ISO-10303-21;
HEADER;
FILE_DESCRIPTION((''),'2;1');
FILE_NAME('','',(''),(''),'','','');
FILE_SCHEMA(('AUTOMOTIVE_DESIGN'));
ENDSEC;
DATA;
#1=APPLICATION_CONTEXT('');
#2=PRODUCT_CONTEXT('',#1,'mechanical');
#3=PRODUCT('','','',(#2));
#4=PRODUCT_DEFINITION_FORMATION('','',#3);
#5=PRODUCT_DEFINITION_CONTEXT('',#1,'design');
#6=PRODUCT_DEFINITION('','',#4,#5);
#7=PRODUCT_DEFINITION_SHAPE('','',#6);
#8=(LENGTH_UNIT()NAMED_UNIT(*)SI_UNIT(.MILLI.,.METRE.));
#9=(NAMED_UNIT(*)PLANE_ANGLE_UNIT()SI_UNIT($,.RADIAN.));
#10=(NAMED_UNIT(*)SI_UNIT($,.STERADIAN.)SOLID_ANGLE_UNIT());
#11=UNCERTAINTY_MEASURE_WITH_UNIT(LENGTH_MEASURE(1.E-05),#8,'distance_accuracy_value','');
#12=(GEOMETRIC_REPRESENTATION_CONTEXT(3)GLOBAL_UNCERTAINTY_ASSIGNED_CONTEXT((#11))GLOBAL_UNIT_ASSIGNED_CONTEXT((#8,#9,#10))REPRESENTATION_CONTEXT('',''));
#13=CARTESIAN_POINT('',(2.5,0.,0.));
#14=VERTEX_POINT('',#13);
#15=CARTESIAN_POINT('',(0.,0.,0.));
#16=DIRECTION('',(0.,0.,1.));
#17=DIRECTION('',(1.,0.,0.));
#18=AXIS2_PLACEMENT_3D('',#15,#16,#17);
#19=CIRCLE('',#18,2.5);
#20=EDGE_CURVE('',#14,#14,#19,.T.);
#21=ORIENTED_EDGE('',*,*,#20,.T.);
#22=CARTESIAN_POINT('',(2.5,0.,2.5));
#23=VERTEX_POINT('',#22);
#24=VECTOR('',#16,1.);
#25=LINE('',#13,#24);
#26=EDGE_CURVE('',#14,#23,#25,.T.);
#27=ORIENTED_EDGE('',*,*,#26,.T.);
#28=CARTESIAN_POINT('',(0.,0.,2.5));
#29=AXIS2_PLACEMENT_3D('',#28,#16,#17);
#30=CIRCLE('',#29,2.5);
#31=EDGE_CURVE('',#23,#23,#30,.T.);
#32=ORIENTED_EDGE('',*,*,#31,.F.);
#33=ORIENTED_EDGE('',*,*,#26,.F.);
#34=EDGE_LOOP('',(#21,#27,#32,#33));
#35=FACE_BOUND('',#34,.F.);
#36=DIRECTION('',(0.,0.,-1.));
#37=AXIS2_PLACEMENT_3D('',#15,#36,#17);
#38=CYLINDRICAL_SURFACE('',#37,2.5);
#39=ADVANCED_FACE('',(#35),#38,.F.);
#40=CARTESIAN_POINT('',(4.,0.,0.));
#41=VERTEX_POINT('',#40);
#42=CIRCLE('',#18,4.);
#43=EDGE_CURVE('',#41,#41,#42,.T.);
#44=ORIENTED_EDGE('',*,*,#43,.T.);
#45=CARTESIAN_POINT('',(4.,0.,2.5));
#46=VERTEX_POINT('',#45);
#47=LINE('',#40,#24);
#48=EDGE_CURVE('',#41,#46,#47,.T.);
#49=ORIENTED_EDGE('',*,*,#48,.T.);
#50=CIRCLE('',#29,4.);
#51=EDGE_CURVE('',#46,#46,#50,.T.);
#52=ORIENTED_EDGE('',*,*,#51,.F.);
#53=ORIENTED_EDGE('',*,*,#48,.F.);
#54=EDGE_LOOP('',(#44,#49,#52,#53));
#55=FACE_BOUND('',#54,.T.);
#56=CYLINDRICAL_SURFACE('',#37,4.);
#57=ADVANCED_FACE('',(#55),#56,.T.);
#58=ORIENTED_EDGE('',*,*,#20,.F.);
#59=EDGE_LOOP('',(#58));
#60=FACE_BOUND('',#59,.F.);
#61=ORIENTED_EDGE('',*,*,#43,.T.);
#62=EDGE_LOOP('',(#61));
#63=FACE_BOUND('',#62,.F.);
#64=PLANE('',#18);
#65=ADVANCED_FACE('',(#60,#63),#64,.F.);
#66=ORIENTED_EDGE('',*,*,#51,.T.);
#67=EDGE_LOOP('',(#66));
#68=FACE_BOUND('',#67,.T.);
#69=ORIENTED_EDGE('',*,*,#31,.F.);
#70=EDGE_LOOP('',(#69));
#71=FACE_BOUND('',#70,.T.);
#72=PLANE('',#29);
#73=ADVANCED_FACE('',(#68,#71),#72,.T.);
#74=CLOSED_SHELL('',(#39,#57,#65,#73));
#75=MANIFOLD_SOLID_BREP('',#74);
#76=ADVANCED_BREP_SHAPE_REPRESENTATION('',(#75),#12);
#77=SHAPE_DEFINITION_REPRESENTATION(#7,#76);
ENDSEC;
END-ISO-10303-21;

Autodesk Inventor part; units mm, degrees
ref_plane "YZ Plane" through (0, 0, 0) normal (1, 0, 0) x (0, 1, 0)
ref_plane "XZ Plane" through (0, 0, 0) normal (0, 1, 0) x (-1, 0, 0)
ref_plane "XY Plane" through (0, 0, 0) normal (0, 0, 1) x (1, 0, 0)
sketch "Skizze1" plane through (0, 0, 0) normal (0, 0, 1) x (1, 0, 0)
  circle A0 centre (0, 0) radius 2.5 projected
  circle A1 centre (0, 0) radius 3 projected
  circle A2 centre (0, 0) radius 2.5
  circle A3 centre (0, 0) radius 4
  point P0 (0, 0)
  dimension "d0" = 8
extrude "Extrusion1" add sketch "Skizze1" along normal blind 2.5 contours A1 | A3
properties part number "00_Ballbearing_3x8mm"
